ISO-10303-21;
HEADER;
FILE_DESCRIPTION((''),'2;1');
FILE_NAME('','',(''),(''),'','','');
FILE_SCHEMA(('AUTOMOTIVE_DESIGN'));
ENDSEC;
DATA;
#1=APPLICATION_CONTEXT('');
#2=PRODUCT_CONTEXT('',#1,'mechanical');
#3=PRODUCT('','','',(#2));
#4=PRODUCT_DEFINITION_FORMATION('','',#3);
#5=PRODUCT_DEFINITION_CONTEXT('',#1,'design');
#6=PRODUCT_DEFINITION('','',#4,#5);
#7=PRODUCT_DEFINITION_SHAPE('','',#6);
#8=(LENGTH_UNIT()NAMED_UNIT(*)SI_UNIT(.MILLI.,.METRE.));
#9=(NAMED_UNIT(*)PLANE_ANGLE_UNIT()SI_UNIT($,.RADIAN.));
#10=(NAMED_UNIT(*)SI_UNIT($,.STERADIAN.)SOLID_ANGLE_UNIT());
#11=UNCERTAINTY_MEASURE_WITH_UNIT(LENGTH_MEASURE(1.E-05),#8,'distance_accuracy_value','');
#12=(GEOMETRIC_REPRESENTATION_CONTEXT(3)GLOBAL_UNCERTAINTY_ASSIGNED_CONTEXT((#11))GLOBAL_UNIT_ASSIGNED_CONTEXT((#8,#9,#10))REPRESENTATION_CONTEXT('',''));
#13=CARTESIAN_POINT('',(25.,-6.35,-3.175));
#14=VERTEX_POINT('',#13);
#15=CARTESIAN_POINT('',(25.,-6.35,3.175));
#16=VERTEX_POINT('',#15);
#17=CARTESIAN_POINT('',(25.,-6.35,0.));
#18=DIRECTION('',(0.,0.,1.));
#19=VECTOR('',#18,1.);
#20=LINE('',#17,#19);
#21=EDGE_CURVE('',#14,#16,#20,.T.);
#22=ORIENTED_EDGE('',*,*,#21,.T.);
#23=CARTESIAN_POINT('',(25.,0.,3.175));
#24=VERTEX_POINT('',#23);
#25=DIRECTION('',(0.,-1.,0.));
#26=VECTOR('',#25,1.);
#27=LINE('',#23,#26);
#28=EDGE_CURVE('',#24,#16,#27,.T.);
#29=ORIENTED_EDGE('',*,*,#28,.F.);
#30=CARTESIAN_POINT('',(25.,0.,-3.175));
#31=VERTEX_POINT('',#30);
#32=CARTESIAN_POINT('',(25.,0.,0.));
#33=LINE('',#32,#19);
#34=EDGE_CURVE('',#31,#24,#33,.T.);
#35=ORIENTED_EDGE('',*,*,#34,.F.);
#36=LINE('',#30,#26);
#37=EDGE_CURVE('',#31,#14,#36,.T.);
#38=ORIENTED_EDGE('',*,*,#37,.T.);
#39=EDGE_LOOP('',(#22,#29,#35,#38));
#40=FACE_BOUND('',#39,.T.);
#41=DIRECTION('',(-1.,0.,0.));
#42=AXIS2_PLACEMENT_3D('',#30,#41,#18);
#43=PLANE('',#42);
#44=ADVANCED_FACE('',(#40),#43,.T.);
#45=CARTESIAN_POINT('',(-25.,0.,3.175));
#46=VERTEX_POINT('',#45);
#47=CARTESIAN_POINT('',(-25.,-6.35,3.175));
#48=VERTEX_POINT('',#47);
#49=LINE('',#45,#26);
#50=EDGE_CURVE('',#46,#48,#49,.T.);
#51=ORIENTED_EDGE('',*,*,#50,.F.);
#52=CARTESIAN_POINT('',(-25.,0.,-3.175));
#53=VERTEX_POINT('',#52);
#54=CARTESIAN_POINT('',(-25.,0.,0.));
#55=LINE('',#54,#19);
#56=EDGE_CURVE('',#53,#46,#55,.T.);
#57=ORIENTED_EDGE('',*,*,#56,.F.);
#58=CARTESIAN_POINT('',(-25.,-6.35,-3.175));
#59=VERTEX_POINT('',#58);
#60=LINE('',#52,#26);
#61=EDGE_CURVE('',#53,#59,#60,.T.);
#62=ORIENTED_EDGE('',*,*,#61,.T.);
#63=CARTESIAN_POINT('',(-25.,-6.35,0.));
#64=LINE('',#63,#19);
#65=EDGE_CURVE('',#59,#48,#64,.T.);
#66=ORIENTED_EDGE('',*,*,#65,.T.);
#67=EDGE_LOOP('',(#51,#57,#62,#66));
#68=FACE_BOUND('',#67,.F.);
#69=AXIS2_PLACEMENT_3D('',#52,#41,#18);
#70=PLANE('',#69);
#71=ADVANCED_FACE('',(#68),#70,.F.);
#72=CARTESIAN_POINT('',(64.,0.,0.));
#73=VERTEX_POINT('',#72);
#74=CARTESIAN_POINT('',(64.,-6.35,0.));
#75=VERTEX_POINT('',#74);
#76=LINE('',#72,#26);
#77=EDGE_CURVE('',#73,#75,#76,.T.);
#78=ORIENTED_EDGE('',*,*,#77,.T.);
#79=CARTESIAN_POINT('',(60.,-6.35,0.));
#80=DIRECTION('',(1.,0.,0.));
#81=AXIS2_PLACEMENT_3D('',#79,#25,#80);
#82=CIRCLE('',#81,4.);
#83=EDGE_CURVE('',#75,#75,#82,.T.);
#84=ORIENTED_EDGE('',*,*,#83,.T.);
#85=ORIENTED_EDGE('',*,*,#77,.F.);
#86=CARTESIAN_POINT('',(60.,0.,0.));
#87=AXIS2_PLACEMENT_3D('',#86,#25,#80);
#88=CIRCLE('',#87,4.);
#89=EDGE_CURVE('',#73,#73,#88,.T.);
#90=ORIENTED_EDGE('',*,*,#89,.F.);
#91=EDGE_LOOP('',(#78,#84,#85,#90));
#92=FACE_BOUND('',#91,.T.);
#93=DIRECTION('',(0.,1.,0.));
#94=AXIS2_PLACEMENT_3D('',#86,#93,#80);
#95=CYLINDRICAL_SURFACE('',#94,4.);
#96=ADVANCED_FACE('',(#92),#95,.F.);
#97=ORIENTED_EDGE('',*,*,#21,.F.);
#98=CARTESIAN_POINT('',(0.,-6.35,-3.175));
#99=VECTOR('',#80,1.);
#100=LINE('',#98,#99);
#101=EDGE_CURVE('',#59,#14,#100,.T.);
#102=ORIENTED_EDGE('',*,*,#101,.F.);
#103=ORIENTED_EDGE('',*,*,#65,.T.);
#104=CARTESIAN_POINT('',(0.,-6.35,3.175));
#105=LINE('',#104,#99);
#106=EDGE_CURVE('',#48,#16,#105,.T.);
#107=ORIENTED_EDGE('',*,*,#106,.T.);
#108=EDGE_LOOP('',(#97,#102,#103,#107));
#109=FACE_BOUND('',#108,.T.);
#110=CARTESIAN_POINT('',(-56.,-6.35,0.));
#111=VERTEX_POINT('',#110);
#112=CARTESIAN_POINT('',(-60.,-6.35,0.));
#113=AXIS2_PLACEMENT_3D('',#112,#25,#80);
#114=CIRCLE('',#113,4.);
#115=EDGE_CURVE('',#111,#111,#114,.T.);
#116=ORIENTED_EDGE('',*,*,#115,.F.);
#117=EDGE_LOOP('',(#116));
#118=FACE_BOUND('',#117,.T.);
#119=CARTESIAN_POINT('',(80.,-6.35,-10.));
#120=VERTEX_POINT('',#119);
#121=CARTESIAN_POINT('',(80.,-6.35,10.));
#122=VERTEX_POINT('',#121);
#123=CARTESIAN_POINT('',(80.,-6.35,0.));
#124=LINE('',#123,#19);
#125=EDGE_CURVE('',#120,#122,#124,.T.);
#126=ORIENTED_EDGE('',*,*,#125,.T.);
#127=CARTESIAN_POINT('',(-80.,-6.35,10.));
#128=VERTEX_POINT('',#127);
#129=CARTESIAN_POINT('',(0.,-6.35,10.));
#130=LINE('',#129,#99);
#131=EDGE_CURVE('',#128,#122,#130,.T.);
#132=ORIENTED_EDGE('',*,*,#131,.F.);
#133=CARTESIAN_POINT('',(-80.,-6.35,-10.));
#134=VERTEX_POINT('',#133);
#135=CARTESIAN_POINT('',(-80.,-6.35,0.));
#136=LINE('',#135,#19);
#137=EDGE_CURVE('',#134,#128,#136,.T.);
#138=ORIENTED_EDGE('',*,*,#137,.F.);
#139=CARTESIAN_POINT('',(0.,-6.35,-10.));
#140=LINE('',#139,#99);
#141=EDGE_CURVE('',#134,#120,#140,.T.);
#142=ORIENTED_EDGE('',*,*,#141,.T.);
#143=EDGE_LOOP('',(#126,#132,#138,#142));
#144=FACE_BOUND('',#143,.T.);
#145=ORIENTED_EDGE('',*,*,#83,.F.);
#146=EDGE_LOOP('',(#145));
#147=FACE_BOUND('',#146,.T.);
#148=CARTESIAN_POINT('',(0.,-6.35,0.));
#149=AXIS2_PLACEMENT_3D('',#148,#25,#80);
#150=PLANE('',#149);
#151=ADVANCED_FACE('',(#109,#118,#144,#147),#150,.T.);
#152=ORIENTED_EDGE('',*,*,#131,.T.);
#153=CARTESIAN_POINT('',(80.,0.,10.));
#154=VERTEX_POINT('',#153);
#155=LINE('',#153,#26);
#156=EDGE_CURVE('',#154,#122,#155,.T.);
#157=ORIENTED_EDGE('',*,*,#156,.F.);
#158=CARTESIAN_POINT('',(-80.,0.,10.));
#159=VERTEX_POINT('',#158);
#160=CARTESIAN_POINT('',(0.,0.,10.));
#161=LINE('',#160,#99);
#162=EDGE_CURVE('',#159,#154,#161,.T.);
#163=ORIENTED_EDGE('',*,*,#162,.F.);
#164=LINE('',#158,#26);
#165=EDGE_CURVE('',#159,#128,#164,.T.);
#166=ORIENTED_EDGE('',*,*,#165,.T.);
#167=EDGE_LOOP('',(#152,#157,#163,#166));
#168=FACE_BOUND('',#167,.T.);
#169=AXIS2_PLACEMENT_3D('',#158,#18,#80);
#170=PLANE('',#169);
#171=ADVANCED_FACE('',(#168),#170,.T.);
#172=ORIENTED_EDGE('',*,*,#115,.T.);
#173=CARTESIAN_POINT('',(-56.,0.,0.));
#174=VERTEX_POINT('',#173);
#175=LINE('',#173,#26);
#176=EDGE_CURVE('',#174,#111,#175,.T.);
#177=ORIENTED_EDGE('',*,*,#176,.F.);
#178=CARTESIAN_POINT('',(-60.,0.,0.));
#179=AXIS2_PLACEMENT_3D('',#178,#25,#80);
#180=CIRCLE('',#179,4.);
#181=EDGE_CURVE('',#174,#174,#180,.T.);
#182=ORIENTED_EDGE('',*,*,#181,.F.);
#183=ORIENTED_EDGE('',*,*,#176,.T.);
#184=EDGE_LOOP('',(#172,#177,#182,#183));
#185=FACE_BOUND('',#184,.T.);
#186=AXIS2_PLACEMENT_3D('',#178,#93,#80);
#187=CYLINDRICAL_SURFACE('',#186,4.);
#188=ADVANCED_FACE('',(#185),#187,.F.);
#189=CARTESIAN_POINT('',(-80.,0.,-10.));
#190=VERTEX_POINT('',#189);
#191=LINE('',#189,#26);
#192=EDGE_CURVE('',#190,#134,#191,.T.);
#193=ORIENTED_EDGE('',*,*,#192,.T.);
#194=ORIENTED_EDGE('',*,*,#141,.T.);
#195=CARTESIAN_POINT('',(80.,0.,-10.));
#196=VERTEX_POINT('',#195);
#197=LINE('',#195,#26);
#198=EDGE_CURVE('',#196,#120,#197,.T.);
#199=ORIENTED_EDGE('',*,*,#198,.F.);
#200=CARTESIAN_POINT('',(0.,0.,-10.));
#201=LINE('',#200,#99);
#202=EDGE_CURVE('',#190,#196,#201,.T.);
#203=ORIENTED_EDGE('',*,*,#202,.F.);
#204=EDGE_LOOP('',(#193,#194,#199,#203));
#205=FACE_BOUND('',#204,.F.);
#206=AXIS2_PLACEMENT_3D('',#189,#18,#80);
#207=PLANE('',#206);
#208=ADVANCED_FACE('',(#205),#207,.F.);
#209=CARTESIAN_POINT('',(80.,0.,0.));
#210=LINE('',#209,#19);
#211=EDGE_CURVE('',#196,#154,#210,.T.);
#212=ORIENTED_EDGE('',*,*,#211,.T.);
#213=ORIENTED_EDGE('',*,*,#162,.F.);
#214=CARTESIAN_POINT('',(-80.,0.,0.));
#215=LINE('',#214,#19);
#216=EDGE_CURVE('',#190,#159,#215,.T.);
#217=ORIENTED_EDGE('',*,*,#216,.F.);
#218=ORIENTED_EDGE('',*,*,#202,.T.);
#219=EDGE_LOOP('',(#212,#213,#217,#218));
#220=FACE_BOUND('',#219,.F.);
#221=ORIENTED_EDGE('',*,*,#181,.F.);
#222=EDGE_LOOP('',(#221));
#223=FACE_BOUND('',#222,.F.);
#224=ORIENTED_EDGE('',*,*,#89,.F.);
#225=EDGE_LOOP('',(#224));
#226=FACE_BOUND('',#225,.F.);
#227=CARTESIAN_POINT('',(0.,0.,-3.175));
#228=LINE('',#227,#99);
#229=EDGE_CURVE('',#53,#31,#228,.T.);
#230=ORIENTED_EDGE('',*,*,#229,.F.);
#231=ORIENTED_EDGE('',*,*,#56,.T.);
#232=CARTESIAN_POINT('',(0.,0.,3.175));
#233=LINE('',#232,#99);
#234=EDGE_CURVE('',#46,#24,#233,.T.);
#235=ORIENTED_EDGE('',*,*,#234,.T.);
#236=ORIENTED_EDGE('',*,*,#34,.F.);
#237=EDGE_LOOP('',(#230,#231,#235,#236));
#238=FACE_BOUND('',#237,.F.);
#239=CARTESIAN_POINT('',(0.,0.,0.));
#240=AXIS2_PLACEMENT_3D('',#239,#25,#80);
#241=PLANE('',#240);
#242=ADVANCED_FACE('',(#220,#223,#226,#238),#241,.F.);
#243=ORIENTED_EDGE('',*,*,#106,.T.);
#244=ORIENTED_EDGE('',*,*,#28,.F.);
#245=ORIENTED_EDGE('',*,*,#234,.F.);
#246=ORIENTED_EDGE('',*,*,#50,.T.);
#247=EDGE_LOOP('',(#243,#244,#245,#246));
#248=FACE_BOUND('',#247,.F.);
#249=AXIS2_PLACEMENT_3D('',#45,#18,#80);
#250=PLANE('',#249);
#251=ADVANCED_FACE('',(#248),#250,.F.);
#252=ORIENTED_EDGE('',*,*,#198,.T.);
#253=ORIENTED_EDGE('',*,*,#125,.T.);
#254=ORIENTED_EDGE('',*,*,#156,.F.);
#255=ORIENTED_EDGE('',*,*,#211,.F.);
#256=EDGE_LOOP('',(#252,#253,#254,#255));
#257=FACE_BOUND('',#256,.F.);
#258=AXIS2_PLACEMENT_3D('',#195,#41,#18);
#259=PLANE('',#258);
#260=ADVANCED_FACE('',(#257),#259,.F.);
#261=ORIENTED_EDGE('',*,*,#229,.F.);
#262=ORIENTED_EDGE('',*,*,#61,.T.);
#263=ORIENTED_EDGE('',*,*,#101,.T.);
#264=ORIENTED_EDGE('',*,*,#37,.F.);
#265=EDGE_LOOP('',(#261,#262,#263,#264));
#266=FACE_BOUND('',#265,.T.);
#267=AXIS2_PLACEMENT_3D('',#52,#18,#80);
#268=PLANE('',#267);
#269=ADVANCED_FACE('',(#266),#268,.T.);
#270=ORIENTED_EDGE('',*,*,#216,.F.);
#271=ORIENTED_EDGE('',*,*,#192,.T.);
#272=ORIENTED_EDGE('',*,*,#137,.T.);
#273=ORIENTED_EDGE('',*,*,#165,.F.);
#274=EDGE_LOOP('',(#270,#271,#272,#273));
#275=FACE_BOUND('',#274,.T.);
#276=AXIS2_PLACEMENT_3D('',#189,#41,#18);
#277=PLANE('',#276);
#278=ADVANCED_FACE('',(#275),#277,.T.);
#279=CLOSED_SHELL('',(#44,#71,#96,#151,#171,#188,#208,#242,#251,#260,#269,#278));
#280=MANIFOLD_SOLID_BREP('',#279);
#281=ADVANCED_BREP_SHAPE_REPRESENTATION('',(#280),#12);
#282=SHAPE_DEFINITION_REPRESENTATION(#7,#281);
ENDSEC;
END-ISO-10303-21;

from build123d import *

# Parameters (mm, degrees)
F0_W     = 160
F0_H     = 20
F0_R     = 4
F0_W_2   = 50
F0_H_2   = 6.35
F1_DEPTH = 6.35


# Not quite as in the source:
# - a length typed as a fraction of an inch, garbled in the dataset ("3 / 203.2 mm" for 3/8 in), is restored


with BuildPart() as f1:
    # F0 (on Front) → F1 (new body)
    with BuildSketch(Plane.XZ):
        Rectangle(F0_W, F0_H)
        with Locations((-60, 0)):
            Circle(F0_R, mode=Mode.SUBTRACT)
        Rectangle(F0_W_2, F0_H_2, mode=Mode.SUBTRACT)
        with Locations((60, 0)):
            Circle(F0_R, mode=Mode.SUBTRACT)
    extrude(amount=F1_DEPTH)


solid = f1.part
